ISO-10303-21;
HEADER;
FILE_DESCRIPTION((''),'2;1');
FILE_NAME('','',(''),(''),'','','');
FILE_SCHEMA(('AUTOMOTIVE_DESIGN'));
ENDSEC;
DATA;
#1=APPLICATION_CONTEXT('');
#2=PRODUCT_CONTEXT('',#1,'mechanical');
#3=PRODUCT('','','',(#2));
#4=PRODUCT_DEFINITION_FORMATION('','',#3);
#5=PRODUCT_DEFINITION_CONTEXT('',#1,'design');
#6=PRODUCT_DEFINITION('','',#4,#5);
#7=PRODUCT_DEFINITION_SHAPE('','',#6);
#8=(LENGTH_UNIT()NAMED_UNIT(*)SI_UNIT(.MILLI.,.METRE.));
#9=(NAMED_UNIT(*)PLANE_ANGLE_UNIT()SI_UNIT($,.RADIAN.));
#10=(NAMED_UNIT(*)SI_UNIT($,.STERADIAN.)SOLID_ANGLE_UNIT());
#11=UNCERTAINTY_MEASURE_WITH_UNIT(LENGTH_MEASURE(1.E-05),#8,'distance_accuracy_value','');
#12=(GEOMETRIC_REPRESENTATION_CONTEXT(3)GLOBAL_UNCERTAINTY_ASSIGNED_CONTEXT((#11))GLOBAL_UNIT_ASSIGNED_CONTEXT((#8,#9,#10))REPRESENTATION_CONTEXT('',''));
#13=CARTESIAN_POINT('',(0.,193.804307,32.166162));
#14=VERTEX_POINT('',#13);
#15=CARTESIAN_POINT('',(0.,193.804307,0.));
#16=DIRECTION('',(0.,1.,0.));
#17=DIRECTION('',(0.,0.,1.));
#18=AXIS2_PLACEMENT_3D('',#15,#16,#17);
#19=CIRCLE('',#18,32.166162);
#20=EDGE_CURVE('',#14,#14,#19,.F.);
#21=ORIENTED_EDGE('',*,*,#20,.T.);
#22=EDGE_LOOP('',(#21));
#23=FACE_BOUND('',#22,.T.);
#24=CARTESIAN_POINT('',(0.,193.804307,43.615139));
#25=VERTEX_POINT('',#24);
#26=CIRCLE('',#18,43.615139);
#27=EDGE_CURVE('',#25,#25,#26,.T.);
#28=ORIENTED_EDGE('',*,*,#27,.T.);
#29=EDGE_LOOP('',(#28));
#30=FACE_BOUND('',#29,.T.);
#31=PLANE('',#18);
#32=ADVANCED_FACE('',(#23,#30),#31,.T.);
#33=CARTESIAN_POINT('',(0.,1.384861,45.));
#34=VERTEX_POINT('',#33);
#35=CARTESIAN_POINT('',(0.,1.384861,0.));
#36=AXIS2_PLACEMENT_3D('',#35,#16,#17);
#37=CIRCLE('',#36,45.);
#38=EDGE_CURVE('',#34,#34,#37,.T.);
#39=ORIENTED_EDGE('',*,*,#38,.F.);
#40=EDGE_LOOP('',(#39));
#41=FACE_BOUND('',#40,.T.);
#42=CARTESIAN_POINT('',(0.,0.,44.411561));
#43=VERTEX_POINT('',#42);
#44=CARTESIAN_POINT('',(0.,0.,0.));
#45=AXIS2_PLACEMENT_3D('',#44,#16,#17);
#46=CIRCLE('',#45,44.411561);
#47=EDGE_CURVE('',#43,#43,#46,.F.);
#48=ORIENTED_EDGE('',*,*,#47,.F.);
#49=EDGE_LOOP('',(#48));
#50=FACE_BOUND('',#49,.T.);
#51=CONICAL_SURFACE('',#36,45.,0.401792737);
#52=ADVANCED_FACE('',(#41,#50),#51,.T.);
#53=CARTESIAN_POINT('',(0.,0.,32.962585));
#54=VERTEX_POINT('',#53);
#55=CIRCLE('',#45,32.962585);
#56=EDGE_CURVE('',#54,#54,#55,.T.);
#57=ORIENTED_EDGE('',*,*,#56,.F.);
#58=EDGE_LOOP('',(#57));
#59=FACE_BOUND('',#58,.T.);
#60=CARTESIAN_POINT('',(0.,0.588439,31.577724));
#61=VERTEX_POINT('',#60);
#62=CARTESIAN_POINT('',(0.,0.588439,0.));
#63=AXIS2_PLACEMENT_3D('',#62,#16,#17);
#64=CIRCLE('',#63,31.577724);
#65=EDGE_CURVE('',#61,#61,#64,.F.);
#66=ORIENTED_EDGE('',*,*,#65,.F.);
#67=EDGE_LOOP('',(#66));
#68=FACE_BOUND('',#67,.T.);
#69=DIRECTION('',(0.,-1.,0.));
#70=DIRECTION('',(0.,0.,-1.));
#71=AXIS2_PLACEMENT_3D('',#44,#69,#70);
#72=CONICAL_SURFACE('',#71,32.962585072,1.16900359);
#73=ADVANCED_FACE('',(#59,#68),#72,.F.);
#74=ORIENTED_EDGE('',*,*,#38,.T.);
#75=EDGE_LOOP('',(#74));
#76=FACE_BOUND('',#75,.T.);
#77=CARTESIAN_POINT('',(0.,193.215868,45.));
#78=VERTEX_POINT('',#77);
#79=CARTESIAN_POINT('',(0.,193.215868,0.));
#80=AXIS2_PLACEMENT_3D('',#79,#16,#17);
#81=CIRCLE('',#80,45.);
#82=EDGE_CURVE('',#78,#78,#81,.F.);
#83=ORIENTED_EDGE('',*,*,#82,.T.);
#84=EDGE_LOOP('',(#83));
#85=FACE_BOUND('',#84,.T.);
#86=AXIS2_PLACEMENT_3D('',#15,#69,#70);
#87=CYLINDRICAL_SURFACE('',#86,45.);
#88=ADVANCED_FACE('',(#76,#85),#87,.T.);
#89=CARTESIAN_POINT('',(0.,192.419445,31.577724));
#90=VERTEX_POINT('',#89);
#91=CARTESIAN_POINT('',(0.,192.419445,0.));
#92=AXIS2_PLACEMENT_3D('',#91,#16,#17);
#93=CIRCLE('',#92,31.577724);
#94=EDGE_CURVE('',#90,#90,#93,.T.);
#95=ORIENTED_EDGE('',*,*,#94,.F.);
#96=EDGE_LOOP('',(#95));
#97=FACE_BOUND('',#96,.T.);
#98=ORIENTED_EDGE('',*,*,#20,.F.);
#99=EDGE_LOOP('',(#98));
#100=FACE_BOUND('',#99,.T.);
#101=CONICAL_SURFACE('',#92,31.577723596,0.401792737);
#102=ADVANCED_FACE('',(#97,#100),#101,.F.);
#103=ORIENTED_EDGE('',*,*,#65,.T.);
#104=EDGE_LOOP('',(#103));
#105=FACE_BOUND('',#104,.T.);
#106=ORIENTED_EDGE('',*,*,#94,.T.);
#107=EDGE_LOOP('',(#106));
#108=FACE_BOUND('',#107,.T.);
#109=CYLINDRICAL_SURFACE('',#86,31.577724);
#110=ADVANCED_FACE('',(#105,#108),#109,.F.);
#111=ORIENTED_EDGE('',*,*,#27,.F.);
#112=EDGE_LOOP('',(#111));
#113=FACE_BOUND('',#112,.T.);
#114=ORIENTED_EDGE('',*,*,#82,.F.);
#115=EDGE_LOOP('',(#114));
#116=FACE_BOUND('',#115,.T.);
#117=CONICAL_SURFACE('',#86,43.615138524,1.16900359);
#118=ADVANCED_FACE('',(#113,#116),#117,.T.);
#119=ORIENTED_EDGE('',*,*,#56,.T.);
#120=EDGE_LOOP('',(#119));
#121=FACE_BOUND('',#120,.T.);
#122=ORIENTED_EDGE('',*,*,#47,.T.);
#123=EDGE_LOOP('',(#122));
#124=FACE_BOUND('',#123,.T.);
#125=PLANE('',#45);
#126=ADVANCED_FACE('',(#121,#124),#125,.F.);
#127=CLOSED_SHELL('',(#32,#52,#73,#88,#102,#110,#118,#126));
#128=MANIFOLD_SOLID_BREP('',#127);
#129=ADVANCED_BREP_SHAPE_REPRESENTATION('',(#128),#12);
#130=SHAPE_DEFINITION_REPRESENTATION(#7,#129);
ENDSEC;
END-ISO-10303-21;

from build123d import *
from OCP.BRepFilletAPI import BRepFilletAPI_MakeChamfer

# Parameters (mm, degrees)
SKETCH1_R           = 45
BOSS_EXTRUDE1_DEPTH = 193.804306536
SKETCH2_R           = 31.577723596
CUT_EXTRUDE1_DEPTH  = 204.985561332
CHAMFER1_SIZE       = 0.588438748
CHAMFER1_SIZE2      = 1.384861476


with BuildPart() as part:
    # Sketch1 → Boss-Extrude1 (new body)
    with BuildSketch(Plane(origin=(0, 0, 0), x_dir=(1, 0, 0), z_dir=(0, 1, 0))):
        Circle(SKETCH1_R)
    extrude(amount=BOSS_EXTRUDE1_DEPTH)

    # Sketch2 → Cut-Extrude1 (cut, through all)
    with BuildSketch(Plane(origin=(0, 0, 0), x_dir=(1, 0, 0), z_dir=(0, 1, 0))):
        Circle(SKETCH2_R)
    extrude(amount=CUT_EXTRUDE1_DEPTH, mode=Mode.SUBTRACT)

    # Chamfer1: one chamfer whose edges measure the first distance from different faces: ONE call of the kernel's chamfer builder (chamfer() names one face for all edges)
    chamfer1_edges_1 = [part.edges().sort_by_distance(p)[0] for p in [
        (-31.577723596, 193.804306536, 0),
    ]]
    chamfer1_side_1 = [part.faces().sort_by_distance(p)[0] for p in [
        (-43.727207794, 193.804306536, 0),
    ]]
    chamfer1_edges_2 = [part.edges().sort_by_distance(p)[0] for p in [
        (-31.577723596, 0, 0),
    ]]
    chamfer1_side_2 = [part.faces().sort_by_distance(p)[0] for p in [
        (-31.577723596, 96.902153268, 0),
    ]]
    chamfer1_edges_3 = [part.edges().sort_by_distance(p)[0] for p in [
        (-45, 0, 0),
    ]]
    chamfer1_side_3 = [part.faces().sort_by_distance(p)[0] for p in [
        (-43.727207794, 0, 0),
    ]]
    chamfer1_edges_4 = [part.edges().sort_by_distance(p)[0] for p in [
        (-45, 193.804306536, 0),
    ]]
    chamfer1_side_4 = [part.faces().sort_by_distance(p)[0] for p in [
        (-45, 96.902153268, 0),
    ]]
    chamfer1 = BRepFilletAPI_MakeChamfer(part.part.solid().wrapped)
    for e in chamfer1_edges_1:
        chamfer1.Add(CHAMFER1_SIZE, CHAMFER1_SIZE2, e.wrapped, chamfer1_side_1[0].wrapped)  # the first distance lies on this face
    for e in chamfer1_edges_2:
        chamfer1.Add(CHAMFER1_SIZE, CHAMFER1_SIZE2, e.wrapped, chamfer1_side_2[0].wrapped)  # the first distance lies on this face
    for e in chamfer1_edges_3:
        chamfer1.Add(CHAMFER1_SIZE, CHAMFER1_SIZE2, e.wrapped, chamfer1_side_3[0].wrapped)  # the first distance lies on this face
    for e in chamfer1_edges_4:
        chamfer1.Add(CHAMFER1_SIZE, CHAMFER1_SIZE2, e.wrapped, chamfer1_side_4[0].wrapped)  # the first distance lies on this face
    add(Compound.cast(chamfer1.Shape()), mode=Mode.REPLACE)


solid = part.part
